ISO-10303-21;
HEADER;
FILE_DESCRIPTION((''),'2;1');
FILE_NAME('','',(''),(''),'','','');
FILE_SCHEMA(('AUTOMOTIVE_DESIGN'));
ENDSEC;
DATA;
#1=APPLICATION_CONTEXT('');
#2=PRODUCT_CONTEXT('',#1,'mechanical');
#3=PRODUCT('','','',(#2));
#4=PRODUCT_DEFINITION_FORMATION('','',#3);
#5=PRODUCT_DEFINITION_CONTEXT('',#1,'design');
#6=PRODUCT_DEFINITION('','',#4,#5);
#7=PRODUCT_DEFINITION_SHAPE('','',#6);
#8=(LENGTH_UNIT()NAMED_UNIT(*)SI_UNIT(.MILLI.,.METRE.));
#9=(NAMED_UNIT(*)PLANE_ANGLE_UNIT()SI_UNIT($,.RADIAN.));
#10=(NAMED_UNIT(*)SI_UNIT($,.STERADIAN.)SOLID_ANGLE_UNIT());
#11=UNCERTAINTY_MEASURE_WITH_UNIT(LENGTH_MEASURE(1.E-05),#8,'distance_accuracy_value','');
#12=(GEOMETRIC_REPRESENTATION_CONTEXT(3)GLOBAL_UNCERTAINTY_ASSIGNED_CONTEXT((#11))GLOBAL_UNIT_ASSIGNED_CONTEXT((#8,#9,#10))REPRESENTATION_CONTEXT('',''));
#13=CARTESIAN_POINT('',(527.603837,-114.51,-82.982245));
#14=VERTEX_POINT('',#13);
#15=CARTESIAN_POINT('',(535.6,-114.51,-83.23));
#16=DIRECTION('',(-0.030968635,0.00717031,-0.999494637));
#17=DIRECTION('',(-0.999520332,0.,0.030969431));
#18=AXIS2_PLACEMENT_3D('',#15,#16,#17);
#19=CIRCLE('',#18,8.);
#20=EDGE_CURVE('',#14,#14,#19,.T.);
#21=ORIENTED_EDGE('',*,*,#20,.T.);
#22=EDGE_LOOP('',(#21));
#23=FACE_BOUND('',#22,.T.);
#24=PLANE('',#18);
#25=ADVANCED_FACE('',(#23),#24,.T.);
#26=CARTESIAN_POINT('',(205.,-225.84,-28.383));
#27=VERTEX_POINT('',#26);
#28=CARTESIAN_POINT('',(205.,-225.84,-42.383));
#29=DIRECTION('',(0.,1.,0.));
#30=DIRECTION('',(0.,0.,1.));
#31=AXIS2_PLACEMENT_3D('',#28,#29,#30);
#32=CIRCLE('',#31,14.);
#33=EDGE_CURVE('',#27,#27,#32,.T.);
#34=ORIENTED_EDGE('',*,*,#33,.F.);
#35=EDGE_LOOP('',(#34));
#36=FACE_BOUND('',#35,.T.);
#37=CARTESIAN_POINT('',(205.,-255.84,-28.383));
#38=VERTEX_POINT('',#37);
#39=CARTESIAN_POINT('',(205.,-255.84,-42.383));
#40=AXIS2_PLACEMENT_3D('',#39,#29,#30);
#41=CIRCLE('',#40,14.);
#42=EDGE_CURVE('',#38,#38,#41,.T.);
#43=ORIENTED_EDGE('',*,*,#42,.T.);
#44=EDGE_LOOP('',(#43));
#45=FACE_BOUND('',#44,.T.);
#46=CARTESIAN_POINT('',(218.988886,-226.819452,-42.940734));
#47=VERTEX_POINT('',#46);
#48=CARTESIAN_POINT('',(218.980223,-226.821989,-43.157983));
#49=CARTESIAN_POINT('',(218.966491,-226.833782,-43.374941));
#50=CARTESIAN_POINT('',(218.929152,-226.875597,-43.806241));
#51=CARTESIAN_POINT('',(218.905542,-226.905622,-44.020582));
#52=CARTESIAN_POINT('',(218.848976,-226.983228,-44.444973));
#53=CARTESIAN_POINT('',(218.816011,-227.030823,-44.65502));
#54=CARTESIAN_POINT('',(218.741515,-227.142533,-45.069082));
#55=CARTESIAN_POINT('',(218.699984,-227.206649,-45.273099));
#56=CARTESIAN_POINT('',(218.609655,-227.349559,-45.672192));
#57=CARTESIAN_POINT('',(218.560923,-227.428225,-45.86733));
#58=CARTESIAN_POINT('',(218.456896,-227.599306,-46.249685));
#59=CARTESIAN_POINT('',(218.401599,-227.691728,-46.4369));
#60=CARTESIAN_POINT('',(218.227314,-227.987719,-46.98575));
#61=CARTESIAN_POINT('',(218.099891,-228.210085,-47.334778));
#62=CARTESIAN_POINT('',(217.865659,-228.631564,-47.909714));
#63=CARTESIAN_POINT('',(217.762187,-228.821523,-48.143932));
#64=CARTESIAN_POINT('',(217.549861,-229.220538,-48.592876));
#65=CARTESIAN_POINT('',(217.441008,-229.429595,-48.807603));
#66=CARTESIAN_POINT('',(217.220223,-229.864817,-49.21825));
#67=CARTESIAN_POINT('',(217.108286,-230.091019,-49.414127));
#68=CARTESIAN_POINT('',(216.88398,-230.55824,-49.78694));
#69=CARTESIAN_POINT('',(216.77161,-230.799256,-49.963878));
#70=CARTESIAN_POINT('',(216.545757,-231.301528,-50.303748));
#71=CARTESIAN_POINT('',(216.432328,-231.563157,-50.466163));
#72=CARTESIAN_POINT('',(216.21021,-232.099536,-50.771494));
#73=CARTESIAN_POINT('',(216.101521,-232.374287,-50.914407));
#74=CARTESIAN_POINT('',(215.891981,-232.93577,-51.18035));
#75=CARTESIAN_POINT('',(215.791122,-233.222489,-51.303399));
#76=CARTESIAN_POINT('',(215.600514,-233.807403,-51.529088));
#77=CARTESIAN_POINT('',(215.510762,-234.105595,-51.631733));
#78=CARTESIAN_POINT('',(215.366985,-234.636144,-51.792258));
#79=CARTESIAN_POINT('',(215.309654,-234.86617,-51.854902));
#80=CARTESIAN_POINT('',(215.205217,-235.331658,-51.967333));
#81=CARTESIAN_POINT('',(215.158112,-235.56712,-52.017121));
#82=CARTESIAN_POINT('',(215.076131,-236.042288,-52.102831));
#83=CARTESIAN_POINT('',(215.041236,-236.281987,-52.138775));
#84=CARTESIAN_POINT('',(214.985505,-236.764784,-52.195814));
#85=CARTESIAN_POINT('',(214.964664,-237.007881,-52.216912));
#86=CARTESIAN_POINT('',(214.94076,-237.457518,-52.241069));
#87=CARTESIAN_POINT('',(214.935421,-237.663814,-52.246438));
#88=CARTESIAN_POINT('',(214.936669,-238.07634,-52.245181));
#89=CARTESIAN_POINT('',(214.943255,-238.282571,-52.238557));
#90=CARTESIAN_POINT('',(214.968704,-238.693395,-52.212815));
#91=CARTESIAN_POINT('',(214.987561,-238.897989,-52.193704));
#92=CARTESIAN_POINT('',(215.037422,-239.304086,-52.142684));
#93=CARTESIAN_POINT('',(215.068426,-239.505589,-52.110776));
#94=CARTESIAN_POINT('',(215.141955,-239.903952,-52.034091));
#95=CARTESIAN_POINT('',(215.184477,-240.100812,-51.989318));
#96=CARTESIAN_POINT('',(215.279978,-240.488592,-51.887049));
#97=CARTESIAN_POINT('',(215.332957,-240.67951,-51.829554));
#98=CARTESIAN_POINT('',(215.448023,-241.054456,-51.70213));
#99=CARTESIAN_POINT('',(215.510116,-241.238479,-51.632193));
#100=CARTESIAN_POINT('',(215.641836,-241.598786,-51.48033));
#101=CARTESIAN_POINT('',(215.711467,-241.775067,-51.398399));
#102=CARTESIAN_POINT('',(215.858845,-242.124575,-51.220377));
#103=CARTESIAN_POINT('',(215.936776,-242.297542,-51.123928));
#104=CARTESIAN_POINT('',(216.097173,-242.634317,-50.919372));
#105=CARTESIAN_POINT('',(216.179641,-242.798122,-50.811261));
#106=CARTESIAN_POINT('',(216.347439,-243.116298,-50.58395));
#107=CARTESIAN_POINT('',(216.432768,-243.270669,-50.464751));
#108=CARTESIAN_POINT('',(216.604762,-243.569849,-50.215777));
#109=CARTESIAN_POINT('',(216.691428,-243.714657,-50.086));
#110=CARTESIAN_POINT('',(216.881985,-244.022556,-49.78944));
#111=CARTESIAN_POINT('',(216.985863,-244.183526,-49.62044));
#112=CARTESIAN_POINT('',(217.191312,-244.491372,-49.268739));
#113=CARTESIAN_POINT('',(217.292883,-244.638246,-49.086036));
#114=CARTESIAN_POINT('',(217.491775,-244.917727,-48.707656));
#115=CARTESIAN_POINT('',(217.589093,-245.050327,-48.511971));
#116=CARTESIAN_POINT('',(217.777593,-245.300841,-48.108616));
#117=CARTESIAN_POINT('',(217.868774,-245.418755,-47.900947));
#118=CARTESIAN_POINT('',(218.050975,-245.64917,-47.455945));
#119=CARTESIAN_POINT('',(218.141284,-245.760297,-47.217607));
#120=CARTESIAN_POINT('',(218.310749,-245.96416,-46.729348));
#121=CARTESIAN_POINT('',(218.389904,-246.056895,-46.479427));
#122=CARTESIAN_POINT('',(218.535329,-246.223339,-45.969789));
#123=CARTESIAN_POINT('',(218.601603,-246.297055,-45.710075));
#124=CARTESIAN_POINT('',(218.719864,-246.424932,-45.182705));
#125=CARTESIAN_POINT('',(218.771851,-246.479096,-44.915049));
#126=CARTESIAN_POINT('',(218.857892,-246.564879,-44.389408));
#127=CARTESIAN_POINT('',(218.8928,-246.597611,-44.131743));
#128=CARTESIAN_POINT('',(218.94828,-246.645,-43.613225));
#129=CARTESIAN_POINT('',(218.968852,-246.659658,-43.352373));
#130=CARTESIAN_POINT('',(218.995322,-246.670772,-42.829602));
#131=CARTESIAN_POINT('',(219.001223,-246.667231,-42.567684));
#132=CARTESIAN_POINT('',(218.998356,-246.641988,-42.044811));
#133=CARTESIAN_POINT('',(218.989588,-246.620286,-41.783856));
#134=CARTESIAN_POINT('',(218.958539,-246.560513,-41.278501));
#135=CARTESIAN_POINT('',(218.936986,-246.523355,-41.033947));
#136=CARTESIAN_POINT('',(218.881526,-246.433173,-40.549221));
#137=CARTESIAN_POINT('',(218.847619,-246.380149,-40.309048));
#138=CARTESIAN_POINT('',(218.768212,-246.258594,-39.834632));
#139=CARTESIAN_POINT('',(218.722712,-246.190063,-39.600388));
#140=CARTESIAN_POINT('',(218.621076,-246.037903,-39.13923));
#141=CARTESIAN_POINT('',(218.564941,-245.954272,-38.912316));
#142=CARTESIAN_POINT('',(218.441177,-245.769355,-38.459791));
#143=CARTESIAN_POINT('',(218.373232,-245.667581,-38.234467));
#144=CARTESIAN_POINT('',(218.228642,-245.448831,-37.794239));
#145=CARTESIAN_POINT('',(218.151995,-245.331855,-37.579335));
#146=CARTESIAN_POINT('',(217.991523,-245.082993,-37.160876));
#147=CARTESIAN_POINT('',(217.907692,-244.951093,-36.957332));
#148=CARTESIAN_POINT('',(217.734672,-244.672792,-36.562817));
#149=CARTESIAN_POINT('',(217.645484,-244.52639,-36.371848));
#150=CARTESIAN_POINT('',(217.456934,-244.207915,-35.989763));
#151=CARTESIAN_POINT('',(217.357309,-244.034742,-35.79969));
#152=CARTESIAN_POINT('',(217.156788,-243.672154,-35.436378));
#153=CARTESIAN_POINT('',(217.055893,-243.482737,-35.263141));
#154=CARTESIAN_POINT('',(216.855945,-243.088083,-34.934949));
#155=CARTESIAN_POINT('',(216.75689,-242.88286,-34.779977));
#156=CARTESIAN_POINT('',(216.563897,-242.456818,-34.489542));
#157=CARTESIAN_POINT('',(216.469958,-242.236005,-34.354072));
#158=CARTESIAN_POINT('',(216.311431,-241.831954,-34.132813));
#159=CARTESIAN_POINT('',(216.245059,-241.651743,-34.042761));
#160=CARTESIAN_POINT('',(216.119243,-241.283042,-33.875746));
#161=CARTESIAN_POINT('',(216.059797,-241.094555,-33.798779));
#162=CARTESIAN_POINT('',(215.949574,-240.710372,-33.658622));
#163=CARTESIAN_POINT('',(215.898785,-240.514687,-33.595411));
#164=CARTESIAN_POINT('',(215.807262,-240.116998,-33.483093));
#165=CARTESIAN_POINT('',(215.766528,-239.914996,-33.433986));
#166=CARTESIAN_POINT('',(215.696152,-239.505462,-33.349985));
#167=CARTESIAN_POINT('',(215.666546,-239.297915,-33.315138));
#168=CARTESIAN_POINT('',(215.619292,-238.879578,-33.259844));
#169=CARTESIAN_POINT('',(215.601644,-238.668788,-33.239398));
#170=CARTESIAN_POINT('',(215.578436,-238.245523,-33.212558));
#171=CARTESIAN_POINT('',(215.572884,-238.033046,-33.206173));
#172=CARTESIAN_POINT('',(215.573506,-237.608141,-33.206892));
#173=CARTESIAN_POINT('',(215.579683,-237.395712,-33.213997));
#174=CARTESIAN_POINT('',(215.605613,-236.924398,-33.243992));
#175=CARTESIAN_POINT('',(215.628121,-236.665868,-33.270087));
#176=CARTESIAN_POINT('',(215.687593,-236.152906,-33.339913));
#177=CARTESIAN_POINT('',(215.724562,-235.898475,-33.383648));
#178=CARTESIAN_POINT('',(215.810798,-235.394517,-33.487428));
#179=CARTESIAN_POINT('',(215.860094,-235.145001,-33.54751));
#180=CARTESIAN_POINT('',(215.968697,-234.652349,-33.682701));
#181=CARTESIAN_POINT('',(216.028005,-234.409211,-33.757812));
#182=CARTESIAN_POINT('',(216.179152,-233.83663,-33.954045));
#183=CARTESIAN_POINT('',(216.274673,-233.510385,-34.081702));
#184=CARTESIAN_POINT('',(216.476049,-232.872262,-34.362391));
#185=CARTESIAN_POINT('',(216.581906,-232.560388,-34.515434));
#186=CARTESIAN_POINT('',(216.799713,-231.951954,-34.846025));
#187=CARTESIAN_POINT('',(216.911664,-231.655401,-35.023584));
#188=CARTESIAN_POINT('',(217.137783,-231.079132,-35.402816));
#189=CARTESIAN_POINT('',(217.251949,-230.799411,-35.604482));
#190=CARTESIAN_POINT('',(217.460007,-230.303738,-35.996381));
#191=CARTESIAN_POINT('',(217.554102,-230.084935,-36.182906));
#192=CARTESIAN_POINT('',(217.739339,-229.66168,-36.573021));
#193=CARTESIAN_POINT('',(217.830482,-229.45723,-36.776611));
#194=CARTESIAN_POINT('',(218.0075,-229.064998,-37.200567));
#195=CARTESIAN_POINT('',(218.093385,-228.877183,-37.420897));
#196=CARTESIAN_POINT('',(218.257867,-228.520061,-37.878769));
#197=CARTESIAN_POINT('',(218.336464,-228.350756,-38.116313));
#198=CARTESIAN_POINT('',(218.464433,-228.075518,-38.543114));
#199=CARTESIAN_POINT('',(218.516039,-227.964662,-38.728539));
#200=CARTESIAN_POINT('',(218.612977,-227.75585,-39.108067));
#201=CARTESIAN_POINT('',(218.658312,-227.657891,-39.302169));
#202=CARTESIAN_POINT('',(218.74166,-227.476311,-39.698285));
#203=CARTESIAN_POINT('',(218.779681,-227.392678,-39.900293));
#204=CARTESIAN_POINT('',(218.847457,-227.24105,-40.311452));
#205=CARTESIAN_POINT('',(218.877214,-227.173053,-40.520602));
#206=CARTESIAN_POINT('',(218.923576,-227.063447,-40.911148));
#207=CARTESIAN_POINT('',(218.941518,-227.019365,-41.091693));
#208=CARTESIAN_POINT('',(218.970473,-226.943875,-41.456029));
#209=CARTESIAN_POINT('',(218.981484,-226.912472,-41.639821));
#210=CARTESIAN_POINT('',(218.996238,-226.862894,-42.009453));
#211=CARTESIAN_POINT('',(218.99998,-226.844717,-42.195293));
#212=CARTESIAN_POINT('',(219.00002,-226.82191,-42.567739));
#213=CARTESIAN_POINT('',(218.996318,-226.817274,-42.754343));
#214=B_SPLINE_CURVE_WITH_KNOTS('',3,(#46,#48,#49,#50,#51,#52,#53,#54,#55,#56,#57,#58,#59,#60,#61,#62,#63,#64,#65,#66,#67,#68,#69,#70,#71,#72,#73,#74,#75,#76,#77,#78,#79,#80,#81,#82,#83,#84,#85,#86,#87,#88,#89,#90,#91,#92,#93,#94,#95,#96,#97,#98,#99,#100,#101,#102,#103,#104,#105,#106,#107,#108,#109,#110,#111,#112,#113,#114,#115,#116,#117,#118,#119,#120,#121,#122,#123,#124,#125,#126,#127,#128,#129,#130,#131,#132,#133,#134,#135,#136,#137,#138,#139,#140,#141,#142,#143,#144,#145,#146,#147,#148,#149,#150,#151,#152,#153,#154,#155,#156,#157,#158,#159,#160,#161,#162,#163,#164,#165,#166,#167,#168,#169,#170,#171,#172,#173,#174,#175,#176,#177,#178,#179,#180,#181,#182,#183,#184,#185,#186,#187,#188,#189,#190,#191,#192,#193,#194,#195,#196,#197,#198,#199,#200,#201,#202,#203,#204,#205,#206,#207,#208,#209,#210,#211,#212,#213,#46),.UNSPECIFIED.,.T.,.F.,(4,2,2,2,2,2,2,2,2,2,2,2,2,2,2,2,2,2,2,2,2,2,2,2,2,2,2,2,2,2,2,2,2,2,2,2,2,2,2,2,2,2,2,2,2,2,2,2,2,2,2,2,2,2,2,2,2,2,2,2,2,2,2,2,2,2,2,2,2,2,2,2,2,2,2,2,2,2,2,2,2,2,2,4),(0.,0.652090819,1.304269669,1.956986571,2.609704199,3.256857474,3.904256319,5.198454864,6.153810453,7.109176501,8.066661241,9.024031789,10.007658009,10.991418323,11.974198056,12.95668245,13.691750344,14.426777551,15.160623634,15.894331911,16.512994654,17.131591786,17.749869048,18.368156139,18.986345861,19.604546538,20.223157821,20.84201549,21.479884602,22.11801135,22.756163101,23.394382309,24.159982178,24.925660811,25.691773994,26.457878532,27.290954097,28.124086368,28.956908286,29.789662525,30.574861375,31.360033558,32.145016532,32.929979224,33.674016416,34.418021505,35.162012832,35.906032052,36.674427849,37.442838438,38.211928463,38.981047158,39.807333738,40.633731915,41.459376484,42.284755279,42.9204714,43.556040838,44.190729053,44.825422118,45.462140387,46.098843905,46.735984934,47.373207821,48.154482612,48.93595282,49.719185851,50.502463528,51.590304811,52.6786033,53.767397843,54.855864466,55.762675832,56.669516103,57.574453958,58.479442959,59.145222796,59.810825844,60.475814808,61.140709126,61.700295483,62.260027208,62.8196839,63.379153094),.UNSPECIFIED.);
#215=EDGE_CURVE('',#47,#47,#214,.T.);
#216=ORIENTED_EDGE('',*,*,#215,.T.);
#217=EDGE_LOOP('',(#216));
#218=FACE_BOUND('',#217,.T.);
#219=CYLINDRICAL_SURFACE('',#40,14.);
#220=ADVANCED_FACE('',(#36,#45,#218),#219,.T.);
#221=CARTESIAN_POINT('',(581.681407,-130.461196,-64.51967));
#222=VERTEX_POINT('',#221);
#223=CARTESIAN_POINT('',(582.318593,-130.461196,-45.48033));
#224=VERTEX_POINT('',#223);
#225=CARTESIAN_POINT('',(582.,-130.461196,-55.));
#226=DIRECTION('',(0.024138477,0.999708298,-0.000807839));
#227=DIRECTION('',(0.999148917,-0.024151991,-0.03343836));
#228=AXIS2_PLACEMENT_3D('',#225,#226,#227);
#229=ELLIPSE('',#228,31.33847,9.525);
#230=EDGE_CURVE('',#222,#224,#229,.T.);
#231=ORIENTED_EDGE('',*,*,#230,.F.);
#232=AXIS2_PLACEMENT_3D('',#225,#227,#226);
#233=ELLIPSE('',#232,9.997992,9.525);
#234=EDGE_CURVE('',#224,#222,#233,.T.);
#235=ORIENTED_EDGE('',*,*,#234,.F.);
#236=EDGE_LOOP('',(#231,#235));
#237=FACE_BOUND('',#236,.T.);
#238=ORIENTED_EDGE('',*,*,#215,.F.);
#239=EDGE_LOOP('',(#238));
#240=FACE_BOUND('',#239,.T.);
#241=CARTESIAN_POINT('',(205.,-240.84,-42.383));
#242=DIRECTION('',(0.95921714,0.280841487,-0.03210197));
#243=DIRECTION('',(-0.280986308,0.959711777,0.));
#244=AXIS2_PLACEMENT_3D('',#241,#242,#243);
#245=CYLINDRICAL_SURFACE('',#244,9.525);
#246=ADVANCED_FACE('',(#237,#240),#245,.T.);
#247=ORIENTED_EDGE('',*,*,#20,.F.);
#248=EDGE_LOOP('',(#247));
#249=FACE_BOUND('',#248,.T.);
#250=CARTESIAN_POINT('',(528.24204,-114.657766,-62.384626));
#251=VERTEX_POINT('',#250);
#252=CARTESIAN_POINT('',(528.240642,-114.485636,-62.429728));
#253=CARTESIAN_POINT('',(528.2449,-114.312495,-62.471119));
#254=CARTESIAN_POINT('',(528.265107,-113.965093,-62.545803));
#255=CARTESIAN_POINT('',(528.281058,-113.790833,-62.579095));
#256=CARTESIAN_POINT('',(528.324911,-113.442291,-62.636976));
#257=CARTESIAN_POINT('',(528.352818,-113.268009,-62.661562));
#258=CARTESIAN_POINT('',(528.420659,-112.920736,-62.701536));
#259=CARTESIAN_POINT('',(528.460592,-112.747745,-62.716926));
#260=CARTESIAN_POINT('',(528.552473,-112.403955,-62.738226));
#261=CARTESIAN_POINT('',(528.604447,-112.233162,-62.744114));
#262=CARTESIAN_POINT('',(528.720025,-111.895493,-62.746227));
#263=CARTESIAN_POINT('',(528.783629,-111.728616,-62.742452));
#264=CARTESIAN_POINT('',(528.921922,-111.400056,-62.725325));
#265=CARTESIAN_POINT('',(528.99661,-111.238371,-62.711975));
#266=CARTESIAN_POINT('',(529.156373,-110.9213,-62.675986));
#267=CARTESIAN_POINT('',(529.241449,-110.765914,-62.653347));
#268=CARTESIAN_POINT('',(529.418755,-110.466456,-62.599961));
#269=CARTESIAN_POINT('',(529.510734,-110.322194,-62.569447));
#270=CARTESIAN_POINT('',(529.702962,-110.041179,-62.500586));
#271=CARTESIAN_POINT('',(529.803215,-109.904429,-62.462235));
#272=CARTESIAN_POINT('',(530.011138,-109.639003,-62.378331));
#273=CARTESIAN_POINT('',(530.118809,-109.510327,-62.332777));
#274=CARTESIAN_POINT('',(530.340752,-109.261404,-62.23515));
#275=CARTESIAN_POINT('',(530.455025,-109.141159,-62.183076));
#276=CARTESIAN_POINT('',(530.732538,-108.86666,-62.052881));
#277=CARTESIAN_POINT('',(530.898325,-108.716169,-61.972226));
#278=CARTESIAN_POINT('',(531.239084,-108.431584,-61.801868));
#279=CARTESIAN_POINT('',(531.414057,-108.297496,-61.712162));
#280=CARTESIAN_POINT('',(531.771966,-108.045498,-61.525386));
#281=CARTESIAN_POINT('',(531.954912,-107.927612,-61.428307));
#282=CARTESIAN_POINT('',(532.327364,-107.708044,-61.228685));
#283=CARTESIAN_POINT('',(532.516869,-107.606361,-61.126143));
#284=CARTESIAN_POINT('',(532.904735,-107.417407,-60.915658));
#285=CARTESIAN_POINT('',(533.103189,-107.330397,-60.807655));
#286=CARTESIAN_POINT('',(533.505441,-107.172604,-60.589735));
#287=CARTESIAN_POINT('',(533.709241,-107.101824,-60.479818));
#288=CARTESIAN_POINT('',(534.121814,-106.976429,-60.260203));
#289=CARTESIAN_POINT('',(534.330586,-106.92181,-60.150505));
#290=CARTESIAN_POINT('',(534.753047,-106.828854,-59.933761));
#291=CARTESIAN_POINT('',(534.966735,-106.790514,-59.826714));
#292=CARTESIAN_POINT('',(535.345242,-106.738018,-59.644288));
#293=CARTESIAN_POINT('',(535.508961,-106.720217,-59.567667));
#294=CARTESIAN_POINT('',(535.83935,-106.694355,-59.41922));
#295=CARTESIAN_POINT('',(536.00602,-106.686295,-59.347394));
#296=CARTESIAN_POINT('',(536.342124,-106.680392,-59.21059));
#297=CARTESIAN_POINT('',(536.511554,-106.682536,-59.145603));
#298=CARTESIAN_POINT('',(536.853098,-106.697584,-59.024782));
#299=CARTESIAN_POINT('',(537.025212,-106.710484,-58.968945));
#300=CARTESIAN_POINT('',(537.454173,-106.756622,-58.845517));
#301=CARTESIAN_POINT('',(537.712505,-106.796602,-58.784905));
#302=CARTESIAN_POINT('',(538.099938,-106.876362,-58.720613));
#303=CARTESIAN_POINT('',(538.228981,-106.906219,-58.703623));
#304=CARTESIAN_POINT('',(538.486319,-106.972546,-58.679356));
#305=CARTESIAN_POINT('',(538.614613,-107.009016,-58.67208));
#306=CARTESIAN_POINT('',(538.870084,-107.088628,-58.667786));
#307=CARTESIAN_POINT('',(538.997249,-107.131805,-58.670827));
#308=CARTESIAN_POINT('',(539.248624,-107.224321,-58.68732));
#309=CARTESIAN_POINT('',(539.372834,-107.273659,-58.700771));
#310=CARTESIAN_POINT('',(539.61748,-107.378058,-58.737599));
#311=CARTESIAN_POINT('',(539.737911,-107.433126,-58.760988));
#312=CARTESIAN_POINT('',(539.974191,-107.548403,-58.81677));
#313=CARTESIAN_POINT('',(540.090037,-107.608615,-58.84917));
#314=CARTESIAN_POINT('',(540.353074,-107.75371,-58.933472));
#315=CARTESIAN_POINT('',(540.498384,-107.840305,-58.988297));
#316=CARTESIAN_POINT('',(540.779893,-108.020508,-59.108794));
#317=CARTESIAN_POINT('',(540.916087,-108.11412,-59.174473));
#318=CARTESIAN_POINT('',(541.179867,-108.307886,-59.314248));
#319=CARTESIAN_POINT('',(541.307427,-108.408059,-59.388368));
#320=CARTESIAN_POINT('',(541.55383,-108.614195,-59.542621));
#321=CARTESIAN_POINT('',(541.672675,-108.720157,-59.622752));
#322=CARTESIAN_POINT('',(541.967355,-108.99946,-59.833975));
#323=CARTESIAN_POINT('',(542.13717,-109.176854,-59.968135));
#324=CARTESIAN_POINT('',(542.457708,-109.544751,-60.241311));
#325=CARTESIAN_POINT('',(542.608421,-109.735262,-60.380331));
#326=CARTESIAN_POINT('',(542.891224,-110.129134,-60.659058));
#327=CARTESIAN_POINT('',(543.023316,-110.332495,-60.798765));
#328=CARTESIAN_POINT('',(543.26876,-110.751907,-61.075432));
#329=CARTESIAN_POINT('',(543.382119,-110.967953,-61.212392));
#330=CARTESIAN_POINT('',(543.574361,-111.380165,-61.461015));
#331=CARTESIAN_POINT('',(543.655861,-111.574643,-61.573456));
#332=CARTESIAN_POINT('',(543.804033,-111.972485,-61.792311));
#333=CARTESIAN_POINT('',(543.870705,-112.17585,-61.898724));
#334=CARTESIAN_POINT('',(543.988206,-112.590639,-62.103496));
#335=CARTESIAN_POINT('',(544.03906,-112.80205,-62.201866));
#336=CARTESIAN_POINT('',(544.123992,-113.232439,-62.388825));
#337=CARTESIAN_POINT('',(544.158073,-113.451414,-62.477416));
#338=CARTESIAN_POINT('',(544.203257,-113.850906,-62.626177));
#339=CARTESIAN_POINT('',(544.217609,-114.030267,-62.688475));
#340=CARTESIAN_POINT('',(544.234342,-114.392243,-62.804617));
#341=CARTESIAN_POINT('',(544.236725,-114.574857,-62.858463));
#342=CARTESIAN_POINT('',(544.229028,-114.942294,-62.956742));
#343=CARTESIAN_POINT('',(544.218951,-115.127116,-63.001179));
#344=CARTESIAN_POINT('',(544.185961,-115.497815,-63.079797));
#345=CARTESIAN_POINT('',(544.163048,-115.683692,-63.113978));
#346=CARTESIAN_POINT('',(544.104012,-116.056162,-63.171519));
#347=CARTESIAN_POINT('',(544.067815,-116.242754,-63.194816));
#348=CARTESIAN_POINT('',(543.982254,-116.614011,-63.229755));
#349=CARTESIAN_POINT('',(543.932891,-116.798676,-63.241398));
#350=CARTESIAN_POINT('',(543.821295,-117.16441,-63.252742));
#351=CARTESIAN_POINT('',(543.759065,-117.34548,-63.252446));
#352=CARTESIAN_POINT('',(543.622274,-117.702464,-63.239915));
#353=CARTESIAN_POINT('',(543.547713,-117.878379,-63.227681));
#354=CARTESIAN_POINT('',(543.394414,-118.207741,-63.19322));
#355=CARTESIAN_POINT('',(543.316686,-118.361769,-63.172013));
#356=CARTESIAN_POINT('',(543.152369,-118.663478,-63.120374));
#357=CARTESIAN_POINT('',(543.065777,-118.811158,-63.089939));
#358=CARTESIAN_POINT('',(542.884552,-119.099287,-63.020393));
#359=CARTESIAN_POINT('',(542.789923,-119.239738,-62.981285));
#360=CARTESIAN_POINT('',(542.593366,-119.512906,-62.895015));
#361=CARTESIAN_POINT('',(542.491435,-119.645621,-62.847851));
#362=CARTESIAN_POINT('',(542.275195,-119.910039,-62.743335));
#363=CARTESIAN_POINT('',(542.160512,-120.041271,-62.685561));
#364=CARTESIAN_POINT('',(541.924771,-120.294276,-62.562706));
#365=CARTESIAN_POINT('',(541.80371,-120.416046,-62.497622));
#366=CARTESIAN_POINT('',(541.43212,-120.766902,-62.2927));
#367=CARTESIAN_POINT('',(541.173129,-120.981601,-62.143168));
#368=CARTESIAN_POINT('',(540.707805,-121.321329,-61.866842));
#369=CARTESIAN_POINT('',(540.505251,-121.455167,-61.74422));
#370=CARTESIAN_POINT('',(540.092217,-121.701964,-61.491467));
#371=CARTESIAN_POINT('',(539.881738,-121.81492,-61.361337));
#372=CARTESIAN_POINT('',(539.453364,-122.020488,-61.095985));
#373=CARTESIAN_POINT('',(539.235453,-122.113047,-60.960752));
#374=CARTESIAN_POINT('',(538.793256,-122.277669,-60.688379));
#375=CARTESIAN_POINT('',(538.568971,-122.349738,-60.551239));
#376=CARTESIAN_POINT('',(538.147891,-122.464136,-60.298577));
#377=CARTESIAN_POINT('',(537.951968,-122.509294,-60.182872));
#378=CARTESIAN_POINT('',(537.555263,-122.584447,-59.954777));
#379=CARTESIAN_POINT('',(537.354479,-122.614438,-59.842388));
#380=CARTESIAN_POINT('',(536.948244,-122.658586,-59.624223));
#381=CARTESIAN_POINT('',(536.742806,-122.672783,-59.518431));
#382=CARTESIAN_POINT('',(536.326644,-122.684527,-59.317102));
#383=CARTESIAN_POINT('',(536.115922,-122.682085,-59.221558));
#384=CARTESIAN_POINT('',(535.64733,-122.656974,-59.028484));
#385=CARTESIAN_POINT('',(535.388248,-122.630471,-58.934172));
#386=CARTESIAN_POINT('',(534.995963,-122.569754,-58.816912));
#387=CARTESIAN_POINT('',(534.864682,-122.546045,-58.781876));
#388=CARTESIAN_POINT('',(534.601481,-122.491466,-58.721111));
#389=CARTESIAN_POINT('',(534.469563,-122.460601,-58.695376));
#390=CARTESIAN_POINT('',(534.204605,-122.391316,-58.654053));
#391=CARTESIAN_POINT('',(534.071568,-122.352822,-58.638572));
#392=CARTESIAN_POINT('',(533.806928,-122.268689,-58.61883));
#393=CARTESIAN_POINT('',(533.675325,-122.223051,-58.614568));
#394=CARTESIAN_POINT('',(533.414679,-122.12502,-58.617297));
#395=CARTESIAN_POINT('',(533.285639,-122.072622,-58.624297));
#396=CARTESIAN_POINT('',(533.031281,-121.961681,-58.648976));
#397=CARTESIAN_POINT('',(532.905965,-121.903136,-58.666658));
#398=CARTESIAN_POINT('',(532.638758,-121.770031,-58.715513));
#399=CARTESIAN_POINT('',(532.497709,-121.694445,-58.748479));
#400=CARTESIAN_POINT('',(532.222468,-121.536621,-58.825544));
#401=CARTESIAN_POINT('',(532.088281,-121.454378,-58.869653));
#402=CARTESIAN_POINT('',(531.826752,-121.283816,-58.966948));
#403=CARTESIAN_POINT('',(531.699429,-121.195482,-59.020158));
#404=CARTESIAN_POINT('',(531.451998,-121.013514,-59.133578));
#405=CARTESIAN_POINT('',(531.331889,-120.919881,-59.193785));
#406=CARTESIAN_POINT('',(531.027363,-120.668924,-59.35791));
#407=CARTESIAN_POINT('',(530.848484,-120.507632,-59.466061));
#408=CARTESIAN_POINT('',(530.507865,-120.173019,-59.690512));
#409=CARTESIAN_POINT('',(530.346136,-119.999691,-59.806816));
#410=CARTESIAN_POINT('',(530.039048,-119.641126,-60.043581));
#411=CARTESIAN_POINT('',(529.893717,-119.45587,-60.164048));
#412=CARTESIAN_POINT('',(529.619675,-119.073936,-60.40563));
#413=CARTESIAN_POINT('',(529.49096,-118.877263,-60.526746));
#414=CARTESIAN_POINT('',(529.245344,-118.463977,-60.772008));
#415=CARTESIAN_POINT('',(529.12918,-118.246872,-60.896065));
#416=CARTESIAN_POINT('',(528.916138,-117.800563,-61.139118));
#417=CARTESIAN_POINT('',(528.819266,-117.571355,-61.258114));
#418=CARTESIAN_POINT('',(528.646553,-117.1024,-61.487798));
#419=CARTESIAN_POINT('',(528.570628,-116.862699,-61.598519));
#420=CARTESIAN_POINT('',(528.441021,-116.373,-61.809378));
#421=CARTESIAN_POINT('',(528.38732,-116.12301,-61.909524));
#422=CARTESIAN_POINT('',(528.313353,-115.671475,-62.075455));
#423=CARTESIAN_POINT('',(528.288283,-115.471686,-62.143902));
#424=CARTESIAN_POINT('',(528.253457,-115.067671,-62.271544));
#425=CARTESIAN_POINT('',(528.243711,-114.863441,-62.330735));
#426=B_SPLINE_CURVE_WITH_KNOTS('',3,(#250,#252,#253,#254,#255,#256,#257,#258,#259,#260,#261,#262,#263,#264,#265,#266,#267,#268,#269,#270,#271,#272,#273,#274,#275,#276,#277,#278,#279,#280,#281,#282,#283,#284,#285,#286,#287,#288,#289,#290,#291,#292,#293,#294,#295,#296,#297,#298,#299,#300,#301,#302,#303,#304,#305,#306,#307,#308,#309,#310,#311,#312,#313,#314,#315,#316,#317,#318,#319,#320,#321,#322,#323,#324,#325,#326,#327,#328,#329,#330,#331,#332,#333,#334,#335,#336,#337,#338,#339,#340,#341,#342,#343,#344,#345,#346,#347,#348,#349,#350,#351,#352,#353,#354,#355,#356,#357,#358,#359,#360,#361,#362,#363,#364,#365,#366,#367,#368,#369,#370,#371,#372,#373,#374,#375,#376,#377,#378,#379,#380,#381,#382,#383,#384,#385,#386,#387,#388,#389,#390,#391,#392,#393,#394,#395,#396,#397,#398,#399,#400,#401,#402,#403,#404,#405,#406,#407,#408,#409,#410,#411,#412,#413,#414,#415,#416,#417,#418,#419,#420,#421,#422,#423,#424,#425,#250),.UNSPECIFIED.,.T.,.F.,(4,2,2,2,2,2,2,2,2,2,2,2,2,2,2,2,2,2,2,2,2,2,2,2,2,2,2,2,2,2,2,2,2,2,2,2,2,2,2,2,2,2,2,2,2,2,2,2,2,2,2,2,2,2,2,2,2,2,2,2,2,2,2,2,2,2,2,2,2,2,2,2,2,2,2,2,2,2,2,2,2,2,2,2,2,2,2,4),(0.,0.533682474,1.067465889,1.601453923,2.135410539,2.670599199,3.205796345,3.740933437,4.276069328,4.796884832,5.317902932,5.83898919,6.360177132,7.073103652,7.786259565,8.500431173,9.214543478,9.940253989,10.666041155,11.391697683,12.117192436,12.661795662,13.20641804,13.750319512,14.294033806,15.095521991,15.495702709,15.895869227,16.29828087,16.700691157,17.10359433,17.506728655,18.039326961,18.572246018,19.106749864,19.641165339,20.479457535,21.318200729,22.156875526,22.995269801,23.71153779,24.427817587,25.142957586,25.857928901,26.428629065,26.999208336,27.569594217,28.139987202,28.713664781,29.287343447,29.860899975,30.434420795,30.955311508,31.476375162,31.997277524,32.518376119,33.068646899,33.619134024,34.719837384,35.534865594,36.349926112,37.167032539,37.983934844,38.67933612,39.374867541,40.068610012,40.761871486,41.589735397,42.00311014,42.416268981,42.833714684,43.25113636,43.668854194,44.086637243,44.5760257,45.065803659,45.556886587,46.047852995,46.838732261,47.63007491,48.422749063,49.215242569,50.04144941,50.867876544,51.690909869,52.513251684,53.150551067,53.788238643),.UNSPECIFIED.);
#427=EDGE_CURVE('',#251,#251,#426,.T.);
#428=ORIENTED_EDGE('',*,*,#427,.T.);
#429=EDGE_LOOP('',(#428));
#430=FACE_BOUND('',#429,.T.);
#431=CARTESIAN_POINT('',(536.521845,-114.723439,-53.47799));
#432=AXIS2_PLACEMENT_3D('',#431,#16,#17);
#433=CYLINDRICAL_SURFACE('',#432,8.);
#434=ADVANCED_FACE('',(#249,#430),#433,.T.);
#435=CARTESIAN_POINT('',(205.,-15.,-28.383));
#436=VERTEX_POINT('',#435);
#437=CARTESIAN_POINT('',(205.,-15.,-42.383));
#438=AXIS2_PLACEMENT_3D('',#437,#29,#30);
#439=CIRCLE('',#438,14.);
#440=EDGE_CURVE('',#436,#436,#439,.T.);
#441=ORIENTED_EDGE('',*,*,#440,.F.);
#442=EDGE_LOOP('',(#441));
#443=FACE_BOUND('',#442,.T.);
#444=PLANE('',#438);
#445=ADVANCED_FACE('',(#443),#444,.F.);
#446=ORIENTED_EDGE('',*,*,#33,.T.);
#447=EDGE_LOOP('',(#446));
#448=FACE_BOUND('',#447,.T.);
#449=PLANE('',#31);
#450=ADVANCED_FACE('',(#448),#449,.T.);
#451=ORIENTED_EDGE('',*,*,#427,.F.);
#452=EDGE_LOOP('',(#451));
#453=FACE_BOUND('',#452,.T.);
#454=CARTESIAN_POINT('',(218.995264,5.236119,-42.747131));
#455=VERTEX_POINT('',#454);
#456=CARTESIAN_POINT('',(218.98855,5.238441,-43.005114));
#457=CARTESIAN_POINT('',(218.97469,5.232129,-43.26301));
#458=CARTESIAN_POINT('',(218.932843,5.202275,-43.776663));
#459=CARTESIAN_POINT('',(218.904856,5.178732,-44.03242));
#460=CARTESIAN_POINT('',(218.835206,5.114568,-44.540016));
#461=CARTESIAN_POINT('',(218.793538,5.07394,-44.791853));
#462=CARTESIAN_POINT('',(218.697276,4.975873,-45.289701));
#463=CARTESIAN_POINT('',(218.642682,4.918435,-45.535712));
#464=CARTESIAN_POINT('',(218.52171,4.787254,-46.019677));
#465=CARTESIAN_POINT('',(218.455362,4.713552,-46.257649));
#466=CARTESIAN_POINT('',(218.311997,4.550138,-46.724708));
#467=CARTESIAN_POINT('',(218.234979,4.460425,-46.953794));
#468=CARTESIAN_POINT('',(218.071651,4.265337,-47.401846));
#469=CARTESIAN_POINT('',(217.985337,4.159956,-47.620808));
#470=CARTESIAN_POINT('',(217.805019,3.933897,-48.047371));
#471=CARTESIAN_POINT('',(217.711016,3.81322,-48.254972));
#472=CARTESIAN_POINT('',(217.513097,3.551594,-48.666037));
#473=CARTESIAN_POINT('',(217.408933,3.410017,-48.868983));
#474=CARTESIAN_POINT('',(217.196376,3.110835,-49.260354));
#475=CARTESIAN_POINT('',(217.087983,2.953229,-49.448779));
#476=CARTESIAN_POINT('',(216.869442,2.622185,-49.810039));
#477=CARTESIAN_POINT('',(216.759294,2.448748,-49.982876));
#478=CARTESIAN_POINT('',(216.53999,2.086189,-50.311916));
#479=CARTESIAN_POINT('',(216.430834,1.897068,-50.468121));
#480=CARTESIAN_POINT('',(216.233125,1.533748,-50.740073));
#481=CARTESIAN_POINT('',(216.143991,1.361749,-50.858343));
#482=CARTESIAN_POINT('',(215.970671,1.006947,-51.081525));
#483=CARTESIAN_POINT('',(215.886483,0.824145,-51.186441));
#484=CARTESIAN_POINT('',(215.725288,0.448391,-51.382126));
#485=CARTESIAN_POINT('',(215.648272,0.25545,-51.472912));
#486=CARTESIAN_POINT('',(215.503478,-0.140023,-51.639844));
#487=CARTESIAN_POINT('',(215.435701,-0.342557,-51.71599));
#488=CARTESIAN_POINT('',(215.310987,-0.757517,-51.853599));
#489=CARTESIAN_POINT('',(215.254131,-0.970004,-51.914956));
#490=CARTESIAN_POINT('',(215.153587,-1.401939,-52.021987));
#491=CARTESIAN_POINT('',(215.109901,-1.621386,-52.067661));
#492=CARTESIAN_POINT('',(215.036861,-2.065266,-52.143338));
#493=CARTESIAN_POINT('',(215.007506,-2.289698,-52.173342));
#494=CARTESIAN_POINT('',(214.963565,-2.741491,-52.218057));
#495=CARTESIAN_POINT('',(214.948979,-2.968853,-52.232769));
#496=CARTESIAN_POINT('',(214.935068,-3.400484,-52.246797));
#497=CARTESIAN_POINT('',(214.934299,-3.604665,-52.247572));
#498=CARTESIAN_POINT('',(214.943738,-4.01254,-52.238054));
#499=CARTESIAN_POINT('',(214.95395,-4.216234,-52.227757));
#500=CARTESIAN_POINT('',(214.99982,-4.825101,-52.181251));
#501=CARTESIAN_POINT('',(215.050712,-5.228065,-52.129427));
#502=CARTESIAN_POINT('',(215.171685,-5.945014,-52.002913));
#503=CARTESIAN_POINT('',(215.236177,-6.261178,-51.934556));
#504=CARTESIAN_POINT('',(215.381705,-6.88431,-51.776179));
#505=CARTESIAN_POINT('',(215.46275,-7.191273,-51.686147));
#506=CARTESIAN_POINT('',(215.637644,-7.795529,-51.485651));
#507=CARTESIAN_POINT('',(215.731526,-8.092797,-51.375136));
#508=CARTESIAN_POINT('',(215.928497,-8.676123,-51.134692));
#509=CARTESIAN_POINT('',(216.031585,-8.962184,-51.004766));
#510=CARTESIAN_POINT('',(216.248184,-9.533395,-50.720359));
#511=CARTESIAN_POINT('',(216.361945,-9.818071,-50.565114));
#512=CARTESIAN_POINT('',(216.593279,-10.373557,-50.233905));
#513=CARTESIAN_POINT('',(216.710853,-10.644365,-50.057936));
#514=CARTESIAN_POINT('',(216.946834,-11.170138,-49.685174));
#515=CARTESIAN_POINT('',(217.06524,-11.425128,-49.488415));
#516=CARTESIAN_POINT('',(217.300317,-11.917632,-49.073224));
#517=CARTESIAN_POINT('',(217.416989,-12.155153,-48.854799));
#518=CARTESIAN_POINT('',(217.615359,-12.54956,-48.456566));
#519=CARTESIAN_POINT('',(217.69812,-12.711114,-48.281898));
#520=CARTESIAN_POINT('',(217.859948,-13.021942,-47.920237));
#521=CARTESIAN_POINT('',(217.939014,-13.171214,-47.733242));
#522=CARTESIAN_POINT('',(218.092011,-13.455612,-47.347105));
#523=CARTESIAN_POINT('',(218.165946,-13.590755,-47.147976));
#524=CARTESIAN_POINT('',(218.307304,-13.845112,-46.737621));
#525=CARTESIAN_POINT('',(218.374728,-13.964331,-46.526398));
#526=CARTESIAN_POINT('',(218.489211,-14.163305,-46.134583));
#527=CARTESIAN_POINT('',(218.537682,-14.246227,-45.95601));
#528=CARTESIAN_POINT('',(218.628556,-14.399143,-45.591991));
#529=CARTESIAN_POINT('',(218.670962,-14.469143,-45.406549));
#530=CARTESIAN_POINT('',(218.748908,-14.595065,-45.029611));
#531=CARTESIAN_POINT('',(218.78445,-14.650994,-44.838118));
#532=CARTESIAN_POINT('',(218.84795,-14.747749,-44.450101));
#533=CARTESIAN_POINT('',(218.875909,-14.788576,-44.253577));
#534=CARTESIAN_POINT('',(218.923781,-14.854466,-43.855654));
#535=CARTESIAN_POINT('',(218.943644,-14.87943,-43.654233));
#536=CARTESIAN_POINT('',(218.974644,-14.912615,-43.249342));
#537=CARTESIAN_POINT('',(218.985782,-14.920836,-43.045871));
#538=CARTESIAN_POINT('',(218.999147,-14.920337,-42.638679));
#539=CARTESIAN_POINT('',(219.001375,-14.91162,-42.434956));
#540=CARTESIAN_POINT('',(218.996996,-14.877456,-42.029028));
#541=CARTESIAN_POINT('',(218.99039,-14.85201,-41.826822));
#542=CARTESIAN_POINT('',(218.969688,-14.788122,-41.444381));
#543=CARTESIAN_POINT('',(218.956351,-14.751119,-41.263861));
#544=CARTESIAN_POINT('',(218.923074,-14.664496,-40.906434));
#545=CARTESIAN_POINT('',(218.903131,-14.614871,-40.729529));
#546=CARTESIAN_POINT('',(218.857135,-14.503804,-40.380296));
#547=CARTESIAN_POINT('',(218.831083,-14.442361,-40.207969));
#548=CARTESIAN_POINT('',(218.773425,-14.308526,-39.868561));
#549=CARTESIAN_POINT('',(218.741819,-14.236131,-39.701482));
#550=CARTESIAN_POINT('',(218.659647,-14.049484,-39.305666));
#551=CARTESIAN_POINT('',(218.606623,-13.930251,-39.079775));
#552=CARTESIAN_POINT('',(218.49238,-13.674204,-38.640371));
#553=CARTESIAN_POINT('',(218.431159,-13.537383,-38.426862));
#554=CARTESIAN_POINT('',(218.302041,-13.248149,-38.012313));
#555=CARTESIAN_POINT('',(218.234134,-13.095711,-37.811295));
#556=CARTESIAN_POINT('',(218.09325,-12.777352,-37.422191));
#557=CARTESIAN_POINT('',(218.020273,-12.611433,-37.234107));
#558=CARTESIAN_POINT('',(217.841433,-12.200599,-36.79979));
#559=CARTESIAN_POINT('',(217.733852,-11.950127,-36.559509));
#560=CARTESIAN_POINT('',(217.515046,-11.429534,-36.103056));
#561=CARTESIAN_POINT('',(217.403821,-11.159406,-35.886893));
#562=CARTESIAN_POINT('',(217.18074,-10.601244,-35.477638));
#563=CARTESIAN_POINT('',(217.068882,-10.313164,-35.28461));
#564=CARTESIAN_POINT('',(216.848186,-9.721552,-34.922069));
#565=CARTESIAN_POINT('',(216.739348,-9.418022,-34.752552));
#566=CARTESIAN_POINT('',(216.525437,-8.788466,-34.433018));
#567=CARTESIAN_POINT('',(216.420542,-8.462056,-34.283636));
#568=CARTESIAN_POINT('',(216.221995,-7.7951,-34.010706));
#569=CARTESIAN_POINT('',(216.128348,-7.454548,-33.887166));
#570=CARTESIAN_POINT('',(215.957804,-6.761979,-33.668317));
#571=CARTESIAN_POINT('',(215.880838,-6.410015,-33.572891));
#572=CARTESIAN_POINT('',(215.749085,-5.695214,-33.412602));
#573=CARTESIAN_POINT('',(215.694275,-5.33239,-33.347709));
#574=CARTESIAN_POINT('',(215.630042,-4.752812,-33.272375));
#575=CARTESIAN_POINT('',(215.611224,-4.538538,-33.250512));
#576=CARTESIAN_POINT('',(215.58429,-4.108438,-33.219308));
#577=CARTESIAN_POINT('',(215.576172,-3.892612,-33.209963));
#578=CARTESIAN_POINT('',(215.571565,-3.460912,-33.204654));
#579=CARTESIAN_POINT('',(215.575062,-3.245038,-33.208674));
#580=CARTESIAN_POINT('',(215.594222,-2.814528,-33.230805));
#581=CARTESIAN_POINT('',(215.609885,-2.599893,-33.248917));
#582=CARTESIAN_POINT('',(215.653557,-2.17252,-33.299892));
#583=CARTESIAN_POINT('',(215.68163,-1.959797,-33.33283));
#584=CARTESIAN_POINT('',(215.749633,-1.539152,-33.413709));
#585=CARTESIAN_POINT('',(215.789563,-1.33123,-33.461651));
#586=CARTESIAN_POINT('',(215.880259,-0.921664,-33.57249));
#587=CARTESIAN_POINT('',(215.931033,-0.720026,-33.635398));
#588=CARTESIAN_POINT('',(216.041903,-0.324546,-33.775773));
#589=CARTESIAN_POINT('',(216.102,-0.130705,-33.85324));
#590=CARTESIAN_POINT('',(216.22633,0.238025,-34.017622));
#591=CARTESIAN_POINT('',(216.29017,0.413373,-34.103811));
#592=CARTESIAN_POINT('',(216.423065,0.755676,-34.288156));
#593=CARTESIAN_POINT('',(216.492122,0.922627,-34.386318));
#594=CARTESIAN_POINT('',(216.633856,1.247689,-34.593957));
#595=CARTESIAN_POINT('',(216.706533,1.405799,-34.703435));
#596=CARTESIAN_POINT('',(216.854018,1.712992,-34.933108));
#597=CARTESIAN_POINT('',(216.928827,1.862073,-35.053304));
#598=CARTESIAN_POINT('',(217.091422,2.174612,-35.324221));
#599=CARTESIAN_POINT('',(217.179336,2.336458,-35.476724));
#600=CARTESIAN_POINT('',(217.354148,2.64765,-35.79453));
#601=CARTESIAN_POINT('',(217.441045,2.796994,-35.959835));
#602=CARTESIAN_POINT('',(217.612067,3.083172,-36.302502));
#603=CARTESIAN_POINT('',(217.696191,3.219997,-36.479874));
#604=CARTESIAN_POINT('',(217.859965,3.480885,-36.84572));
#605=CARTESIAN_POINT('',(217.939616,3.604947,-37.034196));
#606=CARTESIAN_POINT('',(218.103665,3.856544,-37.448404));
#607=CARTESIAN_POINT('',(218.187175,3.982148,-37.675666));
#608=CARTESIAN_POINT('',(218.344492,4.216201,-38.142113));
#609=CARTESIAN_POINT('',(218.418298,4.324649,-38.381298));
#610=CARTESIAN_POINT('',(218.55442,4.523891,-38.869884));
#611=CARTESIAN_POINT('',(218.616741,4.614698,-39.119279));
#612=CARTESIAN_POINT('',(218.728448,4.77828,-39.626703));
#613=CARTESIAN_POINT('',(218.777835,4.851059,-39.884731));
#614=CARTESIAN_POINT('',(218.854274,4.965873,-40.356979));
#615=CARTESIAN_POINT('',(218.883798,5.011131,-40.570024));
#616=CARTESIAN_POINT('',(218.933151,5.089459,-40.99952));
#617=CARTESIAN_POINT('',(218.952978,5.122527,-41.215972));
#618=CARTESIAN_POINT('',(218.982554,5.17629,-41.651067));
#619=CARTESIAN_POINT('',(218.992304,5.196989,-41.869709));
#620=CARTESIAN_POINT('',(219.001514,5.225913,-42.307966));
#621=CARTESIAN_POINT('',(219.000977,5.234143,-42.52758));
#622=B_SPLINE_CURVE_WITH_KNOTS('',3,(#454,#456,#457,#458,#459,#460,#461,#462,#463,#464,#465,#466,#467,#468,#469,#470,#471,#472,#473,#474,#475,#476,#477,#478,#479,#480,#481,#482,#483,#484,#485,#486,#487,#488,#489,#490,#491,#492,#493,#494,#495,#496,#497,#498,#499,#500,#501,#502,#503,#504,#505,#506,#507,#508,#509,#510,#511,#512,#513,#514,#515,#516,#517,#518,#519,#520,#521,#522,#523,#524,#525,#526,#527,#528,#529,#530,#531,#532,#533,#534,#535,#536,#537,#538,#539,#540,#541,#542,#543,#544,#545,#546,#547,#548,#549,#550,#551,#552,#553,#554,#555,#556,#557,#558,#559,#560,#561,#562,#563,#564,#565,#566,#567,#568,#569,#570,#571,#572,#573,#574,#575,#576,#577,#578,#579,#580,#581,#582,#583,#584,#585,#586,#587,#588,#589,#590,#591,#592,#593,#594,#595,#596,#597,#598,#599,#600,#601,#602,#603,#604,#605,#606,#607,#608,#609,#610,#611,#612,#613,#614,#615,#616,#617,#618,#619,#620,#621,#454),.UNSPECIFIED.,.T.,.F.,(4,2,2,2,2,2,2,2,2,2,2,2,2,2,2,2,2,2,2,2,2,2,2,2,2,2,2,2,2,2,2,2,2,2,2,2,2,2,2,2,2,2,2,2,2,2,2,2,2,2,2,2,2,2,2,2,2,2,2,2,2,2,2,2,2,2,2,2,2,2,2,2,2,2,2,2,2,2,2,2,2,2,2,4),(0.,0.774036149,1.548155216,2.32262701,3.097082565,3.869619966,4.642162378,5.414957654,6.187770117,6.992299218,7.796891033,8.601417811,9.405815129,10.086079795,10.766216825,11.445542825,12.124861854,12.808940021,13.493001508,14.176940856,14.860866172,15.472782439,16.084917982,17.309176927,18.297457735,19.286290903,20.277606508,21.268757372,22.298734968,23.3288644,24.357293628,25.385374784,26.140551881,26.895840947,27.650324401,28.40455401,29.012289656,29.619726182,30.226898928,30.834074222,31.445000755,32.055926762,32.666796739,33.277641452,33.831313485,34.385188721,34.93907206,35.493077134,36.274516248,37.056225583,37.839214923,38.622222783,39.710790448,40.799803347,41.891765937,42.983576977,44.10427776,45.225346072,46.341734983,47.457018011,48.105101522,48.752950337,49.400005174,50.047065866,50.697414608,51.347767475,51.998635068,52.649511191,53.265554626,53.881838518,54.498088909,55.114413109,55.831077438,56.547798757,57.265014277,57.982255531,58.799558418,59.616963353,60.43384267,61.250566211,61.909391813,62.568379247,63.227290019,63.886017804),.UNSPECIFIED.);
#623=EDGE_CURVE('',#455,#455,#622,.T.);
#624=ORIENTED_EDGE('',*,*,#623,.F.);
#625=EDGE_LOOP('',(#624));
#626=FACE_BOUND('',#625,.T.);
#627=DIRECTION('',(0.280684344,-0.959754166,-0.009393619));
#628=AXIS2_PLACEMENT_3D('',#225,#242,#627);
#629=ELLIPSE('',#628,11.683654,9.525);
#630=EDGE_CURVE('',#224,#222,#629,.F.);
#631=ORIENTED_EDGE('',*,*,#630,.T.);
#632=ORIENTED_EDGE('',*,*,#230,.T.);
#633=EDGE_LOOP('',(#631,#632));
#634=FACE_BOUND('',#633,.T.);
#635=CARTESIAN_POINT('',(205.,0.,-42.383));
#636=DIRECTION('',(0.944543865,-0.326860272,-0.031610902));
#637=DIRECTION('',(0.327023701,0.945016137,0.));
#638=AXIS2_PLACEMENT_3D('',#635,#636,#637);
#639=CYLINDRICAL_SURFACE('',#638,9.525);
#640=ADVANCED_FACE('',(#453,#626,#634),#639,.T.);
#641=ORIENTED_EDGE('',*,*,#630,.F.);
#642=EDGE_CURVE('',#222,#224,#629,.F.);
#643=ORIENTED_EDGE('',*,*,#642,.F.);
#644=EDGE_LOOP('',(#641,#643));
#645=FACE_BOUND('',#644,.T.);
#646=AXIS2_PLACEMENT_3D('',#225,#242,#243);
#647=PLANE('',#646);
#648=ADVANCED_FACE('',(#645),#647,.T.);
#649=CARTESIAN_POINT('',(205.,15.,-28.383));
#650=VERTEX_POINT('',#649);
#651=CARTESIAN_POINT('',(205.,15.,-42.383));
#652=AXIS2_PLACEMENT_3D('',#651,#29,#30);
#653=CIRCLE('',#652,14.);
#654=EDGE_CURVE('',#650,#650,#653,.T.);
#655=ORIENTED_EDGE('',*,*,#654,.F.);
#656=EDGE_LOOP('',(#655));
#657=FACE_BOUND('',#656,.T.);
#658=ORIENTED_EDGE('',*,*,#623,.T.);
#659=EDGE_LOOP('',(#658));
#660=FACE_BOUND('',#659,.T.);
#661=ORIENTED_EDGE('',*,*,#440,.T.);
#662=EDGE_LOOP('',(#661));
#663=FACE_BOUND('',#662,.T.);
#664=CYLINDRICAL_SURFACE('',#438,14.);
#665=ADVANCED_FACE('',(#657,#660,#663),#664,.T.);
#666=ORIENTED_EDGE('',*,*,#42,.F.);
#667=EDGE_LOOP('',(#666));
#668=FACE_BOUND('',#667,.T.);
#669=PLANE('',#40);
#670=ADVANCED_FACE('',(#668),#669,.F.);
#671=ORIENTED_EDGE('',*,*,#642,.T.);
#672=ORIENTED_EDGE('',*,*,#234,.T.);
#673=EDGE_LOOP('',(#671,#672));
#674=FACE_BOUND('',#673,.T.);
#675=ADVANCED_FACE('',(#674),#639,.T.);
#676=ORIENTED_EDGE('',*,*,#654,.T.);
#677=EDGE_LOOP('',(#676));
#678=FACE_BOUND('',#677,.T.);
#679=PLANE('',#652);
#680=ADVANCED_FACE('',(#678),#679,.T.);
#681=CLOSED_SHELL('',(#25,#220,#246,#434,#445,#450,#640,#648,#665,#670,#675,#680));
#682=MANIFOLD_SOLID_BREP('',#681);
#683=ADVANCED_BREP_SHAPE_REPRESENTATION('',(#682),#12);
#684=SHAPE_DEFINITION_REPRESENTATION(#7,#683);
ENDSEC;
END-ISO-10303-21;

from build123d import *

# Parameters (mm, degrees)
SUSP_FR_LCA_FRONT_LEG_PROFILE_R         = 9.525
SUSP_FR_LCA_REAR_LEG_START              = 194.971257269
SUSP_FR_LCA_REAR_LEG_OUTLINE_R          = 9.525
SUSP_FR_LCA_REAR_LEG_DEPTH              = 392.368202981
SUSP_FR_LCA_REAR_LEG_START_2            = 587.33946025
SUSP_FR_LCA_REAR_LEG_2_OUTLINE_R        = 9.525
SUSP_FR_LCA_REAR_LEG_2_DEPTH            = 13.53250199
SUSP_FR_LCA_REAR_LEG_START_3            = 523.39106775
SUSP_FR_LCA_REAR_LEG_3_OUTLINE_W        = 26
SUSP_FR_LCA_REAR_LEG_3_OUTLINE_H        = 23
SUSP_FR_LCA_REAR_LEG_3_DEPTH            = 11.60893225
SUSP_FR_LCA_BUSH_FRONT_PROFILE_R        = 14
SUSP_FR_LCA_BUSH_REAR_PROFILE_R         = 14
SUSP_FR_PUSHROD_MOUNT_BRACKET_PROFILE_R = 8


with BuildPart() as part:
    # SUSP_FR_LCA_front_leg: sweep along a curve in space
    with BuildLine() as susp_fr_lca_front_leg_path:
        Line((205, -240.84, -42.383), (582, -130.461196, -55))
    # SUSP_FR_LCA_front_leg profile (on start of the path) → SUSP_FR_LCA_front_leg (sweep)
    with BuildSketch(Plane(origin=(205, -240.84, -42.383), x_dir=(-0.2809863080066093, 0.9597117768959672, 0), z_dir=(0.9592171404331008, 0.28084148736685866, -0.03210196992266429))):
        Circle(SUSP_FR_LCA_FRONT_LEG_PROFILE_R)
    sweep(path=susp_fr_lca_front_leg_path.line)

    # SUSP_FR_LCA_rear_leg: read off the stored shape, not the designer's step
    # SUSP_FR_LCA_rear_leg outline → SUSP_FR_LCA_rear_leg (add)
    with BuildSketch(Plane(origin=(0, 0, 0), x_dir=(0.3266773785489796, 0.9450726759891053, -0.01093286070332221), z_dir=(0.9445438654680327, -0.3268602715210149, -0.031610901725756396)).offset(SUSP_FR_LCA_REAR_LEG_START)):
        with Locations((67.432230038, -35.502420765)):
            Circle(SUSP_FR_LCA_REAR_LEG_OUTLINE_R)
    extrude(amount=SUSP_FR_LCA_REAR_LEG_DEPTH)

    # SUSP_FR_LCA_rear_leg 2 outline → SUSP_FR_LCA_rear_leg 2 (add)
    with BuildSketch(Plane(origin=(0, 0, 0), x_dir=(0.3266773785489796, 0.9450726759891053, -0.01093286070332221), z_dir=(0.9445438654680327, -0.3268602715210149, -0.031610901725756396)).offset(SUSP_FR_LCA_REAR_LEG_START_2)):
        with Locations((67.432230038, -35.502420765)):
            Circle(SUSP_FR_LCA_REAR_LEG_2_OUTLINE_R)
    extrude(amount=SUSP_FR_LCA_REAR_LEG_2_DEPTH)

    # SUSP_FR_LCA_rear_leg 3 outline → SUSP_FR_LCA_rear_leg 3 (cut)
    with BuildSketch(Plane(origin=(0, 0, 0), x_dir=(-0.28068434396715386, 0.959754165905817, 0.009393619012821172), z_dir=(0.9592171404331008, 0.2808414873668589, -0.03210196992266429)).offset(SUSP_FR_LCA_REAR_LEG_START_3)):
        with Locations((-289, -35.5)):
            Rectangle(SUSP_FR_LCA_REAR_LEG_3_OUTLINE_W, SUSP_FR_LCA_REAR_LEG_3_OUTLINE_H)
    extrude(amount=SUSP_FR_LCA_REAR_LEG_3_DEPTH, mode=Mode.SUBTRACT)

    # SUSP_FR_LCA_bush_front: sweep along a curve in space
    with BuildLine() as susp_fr_lca_bush_front_path:
        Line((205, -255.84, -42.383), (205, -225.84, -42.383))
    # SUSP_FR_LCA_bush_front profile (on start of the path) → SUSP_FR_LCA_bush_front (sweep)
    with BuildSketch(Plane(origin=(205, -255.84, -42.383), x_dir=(0, 0, 1), z_dir=(0, 1, 0))):
        Circle(SUSP_FR_LCA_BUSH_FRONT_PROFILE_R)
    sweep(path=susp_fr_lca_bush_front_path.line)

    # SUSP_FR_LCA_bush_rear: sweep along a curve in space
    with BuildLine() as susp_fr_lca_bush_rear_path:
        Line((205, -15, -42.383), (205, 15, -42.383))
    # SUSP_FR_LCA_bush_rear profile (on start of the path) → SUSP_FR_LCA_bush_rear (sweep)
    with BuildSketch(Plane(origin=(205, -15, -42.383), x_dir=(0, 0, 1), z_dir=(0, 1, 0))):
        Circle(SUSP_FR_LCA_BUSH_REAR_PROFILE_R)
    sweep(path=susp_fr_lca_bush_rear_path.line)

    # SUSP_FR_pushrod_mount_bracket: sweep along a curve in space
    with BuildLine() as susp_fr_pushrod_mount_bracket_path:
        Line((536.521845, -114.723439, -53.4779897), (535.6, -114.51, -83.23))
    # SUSP_FR_pushrod_mount_bracket profile (on start of the path) → SUSP_FR_pushrod_mount_bracket (sweep)
    with BuildSketch(Plane(origin=(536.521845, -114.723439, -53.4779897), x_dir=(-0.9995203321410445, 0, 0.0309694306802064), z_dir=(-0.030968634548961455, 0.007170309964793488, -0.999494637468947))):
        Circle(SUSP_FR_PUSHROD_MOUNT_BRACKET_PROFILE_R)
    sweep(path=susp_fr_pushrod_mount_bracket_path.line)


solid = part.part
